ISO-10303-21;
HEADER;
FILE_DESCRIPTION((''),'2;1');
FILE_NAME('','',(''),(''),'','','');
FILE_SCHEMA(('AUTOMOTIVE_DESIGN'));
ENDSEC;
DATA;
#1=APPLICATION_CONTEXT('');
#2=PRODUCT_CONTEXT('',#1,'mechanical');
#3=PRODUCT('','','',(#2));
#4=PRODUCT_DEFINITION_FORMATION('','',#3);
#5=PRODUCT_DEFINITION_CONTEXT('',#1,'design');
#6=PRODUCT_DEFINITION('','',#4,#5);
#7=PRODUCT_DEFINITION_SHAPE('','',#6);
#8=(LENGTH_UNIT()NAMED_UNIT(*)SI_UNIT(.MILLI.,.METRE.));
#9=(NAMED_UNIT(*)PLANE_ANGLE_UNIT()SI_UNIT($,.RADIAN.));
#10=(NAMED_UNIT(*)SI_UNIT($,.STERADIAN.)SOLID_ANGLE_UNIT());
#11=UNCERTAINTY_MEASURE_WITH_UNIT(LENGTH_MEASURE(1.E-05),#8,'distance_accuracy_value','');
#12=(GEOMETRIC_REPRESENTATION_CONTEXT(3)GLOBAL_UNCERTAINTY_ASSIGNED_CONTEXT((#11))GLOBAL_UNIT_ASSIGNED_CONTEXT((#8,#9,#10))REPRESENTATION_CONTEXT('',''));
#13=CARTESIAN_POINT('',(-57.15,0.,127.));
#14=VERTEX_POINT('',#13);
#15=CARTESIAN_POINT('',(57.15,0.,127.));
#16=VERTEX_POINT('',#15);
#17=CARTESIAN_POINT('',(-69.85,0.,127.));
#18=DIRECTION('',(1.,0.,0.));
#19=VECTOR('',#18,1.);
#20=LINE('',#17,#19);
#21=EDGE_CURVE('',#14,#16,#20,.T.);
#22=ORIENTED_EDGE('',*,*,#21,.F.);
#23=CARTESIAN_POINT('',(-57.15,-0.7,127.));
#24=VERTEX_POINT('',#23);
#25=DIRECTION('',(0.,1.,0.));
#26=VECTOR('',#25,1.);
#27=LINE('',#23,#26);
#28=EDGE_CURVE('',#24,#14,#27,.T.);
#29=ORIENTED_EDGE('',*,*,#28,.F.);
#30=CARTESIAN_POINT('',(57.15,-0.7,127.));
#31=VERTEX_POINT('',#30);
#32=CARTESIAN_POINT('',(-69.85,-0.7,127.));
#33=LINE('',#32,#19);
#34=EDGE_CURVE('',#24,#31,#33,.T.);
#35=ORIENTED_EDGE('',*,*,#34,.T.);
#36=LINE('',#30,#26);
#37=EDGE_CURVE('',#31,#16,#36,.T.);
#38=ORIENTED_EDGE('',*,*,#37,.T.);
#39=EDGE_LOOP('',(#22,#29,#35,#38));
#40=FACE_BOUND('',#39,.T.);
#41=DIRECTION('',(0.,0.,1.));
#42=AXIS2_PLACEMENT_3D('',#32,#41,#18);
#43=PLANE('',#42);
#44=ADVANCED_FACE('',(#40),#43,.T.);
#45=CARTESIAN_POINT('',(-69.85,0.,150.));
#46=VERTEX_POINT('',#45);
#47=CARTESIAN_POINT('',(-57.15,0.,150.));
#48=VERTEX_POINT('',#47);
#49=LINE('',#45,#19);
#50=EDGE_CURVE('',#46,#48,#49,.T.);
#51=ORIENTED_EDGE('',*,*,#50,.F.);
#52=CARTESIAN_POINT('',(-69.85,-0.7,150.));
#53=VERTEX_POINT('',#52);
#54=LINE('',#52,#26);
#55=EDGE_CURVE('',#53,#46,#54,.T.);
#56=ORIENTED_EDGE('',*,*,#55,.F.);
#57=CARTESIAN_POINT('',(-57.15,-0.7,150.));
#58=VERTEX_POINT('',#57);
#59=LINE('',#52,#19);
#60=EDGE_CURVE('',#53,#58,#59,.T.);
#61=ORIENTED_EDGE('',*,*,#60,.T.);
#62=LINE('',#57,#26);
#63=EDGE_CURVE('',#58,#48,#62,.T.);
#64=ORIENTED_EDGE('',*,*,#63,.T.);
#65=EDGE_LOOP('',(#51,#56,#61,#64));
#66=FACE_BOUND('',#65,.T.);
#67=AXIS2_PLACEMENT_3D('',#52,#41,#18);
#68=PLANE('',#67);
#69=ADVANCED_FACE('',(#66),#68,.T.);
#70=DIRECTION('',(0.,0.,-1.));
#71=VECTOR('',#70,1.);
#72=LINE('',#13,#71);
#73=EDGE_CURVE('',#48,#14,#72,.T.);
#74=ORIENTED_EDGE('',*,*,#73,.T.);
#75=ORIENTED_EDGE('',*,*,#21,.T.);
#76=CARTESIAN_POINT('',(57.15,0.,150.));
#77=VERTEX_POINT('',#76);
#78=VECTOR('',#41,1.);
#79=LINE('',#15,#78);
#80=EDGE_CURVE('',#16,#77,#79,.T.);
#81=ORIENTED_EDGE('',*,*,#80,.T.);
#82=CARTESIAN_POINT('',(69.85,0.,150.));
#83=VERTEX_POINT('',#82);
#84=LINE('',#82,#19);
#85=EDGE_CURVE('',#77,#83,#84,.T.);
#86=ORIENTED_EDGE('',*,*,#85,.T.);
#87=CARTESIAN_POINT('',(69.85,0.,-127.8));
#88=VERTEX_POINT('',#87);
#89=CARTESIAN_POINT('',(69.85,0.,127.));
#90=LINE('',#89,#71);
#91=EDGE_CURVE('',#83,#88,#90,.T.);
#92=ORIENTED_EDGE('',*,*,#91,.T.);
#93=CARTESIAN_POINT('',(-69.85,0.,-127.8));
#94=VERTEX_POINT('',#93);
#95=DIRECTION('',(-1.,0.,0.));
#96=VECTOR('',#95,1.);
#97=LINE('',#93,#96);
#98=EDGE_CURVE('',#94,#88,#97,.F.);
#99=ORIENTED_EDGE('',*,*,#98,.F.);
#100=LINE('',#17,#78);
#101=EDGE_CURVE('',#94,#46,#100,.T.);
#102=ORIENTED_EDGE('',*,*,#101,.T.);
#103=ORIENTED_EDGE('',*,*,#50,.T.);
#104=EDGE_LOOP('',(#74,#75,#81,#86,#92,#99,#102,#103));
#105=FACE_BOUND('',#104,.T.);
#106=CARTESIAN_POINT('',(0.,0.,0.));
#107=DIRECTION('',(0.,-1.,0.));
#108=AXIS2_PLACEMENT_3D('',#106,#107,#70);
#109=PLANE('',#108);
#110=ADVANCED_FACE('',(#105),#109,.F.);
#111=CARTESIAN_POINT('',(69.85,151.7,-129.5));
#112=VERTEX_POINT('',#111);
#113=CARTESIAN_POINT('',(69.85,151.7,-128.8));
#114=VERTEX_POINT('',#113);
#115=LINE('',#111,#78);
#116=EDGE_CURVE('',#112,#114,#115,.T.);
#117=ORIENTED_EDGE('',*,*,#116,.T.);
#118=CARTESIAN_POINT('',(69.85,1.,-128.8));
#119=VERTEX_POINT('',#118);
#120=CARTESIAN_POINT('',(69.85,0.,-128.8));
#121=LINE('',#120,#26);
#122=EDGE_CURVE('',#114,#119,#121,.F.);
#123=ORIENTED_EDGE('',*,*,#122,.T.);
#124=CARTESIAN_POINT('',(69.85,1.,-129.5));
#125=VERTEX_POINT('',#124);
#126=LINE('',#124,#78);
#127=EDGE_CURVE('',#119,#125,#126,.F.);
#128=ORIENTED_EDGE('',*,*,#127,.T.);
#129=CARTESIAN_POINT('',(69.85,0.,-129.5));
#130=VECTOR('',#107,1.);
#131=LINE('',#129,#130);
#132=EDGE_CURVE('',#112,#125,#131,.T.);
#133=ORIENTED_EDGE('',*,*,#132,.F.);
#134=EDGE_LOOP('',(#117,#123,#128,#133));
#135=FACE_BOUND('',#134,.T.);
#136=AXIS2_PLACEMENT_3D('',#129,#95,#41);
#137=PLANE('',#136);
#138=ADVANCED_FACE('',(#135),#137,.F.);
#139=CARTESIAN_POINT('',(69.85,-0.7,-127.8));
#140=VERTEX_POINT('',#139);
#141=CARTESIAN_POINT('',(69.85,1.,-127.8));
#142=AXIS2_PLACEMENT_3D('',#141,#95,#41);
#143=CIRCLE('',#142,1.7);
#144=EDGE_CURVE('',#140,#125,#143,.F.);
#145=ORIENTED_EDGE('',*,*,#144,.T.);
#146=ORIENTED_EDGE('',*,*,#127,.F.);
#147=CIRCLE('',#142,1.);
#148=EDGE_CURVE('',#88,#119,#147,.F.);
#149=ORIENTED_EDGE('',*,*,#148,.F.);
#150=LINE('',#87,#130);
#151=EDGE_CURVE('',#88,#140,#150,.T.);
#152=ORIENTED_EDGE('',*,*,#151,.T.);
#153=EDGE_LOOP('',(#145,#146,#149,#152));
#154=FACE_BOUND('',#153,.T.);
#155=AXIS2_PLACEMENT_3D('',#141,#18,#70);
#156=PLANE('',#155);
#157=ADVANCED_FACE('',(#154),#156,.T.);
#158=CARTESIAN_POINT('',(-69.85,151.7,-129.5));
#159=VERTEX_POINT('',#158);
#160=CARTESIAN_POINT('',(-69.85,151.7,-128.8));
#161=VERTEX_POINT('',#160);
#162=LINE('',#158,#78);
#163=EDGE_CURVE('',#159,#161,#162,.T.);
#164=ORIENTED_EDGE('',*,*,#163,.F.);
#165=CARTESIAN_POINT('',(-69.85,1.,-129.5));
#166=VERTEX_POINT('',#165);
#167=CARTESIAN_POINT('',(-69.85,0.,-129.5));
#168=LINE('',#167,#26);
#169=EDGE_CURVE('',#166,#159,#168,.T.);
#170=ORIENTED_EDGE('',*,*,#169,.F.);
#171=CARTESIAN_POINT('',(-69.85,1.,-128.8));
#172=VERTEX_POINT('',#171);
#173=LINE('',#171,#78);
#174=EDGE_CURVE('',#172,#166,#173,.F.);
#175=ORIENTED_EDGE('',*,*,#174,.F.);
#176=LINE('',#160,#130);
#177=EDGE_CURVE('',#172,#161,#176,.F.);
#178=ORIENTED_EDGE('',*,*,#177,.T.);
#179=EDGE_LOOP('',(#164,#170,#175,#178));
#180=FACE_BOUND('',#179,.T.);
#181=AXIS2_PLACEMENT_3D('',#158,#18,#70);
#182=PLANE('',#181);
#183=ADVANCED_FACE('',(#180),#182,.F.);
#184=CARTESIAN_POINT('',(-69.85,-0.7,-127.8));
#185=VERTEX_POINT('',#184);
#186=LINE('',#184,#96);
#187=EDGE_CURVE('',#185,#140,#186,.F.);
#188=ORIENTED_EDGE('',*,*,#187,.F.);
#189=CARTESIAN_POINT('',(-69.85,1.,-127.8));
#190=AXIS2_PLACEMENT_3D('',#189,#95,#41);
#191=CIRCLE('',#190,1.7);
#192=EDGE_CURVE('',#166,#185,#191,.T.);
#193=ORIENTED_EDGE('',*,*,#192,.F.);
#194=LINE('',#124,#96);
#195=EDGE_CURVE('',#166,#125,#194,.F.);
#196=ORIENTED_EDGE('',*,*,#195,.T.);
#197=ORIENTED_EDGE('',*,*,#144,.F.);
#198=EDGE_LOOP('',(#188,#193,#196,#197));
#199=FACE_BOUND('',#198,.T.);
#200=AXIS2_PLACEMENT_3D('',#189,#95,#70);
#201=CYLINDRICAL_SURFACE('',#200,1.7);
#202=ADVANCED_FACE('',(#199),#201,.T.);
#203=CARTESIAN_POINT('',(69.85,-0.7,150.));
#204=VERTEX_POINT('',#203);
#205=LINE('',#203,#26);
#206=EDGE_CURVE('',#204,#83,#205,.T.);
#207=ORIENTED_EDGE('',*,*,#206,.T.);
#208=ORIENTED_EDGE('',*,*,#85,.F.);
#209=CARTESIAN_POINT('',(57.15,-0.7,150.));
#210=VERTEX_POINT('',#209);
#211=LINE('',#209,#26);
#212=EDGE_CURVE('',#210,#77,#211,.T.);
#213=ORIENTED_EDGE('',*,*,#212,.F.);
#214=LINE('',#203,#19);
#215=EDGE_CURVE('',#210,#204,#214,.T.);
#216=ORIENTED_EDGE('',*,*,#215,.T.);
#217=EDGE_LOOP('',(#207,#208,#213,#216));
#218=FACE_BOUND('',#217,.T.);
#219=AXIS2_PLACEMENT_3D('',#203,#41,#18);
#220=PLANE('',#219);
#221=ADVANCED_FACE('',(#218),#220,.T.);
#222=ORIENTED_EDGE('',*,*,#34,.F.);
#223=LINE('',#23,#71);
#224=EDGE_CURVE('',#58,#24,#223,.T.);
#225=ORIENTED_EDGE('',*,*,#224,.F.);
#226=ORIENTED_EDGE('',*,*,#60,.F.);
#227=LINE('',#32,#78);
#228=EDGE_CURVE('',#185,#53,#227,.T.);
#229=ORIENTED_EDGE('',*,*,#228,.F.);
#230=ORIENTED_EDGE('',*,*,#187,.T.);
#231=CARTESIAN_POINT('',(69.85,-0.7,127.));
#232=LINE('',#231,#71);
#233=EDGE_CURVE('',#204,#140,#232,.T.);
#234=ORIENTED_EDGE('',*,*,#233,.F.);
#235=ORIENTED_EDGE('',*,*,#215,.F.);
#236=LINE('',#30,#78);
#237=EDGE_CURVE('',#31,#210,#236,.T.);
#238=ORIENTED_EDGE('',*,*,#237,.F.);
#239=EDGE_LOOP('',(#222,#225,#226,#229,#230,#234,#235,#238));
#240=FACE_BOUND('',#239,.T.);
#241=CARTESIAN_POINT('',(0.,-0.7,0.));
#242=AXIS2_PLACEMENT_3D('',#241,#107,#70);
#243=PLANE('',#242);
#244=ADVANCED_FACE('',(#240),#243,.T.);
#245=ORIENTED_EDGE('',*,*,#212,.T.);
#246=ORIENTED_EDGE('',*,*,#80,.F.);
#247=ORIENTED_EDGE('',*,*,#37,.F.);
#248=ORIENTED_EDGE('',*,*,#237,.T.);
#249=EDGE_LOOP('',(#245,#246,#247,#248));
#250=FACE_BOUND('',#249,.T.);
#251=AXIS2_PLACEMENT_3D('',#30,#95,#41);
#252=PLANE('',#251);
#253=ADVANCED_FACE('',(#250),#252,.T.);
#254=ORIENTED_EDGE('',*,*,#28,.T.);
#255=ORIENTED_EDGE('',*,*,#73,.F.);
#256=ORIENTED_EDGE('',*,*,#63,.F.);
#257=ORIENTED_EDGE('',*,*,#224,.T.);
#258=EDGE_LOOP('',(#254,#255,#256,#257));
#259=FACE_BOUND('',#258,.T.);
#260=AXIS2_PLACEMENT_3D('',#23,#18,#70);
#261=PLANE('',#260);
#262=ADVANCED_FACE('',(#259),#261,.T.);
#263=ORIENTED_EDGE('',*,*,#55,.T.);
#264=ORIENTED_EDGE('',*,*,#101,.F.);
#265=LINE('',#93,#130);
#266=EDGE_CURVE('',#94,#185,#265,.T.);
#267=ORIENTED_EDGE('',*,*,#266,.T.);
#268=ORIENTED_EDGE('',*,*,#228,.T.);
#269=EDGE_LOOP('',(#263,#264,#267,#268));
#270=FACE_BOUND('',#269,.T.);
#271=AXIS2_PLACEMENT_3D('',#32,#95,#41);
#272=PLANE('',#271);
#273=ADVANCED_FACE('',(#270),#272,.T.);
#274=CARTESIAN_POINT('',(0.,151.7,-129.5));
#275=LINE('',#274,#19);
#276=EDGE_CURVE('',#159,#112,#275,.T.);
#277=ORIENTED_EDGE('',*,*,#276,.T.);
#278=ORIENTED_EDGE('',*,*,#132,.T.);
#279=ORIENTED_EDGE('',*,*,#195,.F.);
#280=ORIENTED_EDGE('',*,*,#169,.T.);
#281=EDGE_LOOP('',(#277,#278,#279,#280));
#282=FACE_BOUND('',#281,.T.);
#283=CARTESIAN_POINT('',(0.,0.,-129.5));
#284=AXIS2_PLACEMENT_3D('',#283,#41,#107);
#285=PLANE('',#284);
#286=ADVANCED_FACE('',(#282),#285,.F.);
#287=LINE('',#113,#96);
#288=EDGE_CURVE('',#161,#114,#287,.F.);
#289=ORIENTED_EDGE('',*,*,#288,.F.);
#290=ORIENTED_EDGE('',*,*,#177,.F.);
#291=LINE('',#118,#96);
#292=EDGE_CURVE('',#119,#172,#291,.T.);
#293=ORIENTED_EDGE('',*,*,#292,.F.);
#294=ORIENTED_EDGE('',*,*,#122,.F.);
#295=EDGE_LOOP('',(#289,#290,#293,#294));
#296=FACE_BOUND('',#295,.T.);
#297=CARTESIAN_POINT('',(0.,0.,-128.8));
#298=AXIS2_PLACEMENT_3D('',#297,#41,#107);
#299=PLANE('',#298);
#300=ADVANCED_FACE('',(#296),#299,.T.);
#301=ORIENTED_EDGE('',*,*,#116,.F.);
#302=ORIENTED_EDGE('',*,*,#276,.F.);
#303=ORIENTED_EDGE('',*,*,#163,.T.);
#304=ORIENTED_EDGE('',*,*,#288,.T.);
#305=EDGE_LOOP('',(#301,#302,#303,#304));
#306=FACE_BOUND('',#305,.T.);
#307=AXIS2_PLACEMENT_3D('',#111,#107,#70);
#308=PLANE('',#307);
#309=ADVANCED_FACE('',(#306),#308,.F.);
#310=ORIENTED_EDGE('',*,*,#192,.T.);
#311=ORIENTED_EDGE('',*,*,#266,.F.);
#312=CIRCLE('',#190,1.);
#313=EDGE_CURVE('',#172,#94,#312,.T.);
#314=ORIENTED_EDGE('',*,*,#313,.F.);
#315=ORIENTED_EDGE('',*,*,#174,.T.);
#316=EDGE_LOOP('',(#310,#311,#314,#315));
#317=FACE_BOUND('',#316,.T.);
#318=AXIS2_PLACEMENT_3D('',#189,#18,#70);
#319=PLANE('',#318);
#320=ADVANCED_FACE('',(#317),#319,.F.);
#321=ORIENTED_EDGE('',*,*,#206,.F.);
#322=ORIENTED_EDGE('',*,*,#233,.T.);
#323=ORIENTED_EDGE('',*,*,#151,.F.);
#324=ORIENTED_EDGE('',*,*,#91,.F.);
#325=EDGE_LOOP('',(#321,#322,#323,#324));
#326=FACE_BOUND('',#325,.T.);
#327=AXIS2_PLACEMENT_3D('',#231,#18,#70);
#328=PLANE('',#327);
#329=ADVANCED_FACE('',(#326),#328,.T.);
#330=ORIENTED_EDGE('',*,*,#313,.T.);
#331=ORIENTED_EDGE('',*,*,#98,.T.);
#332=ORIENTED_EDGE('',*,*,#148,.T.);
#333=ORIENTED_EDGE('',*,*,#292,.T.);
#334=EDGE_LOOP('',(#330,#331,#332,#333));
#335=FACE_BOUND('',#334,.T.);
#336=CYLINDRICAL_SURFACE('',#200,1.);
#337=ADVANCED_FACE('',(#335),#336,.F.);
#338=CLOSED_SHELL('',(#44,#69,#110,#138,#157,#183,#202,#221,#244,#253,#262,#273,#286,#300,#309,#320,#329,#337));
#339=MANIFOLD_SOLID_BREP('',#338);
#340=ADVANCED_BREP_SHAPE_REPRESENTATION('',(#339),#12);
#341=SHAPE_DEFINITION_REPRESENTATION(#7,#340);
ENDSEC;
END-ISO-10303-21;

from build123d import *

# Parameters (mm, degrees)
SKETCH1_W          = 139.7
SKETCH1_H          = 254
BASE_FLANGE1_DEPTH = 0.7
EDGE_FLANGE1_DEPTH = 139.7
SKETCH9_W          = 12.7
SKETCH9_H          = 23
TAB1_DEPTH         = 0.7
SKETCH12_W         = 12.7
SKETCH12_H         = 23
TAB2_DEPTH         = 0.7


# Sheet-metal steps are written as plain solids
with BuildPart() as part:
    # Sketch1 → Base-Flange1 (new body)
    with BuildSketch(Plane(origin=(0, 0, 0), x_dir=(1, 0, 0), z_dir=(0, 1, 0))):
        Rectangle(SKETCH1_W, SKETCH1_H)
    extrude(amount=-BASE_FLANGE1_DEPTH)

    # Edge-Flange1 section (across the edge) → Edge-Flange1 (add)
    with BuildSketch(Plane(origin=(69.85, 0, -128.8), x_dir=(0, 0, 1), z_dir=(-1, 0, 0))):
        with BuildLine():
            Line((-0.7, 1), (-0.7, 151.7))
            Line((-0.7, 151.7), (0, 151.7))
            Line((0, 151.7), (0, 1))
            ThreePointArc((0, 1), (0.292893219, 0.292893219), (1, 0))
            Line((1, 0), (1.8, 0))
            Line((1.8, 0), (1.8, -0.7))
            Line((1.8, -0.7), (1, -0.7))
            ThreePointArc((1, -0.7), (-0.202081528, -0.202081528), (-0.7, 1))
        make_face()
    extrude(amount=EDGE_FLANGE1_DEPTH)

    # Sketch9 → Tab1 (add)
    with BuildSketch(Plane(origin=(0, 0, 0), x_dir=(1, 0, 0), z_dir=(0, 1, 0))):
        with Locations((-63.5, -138.5)):
            Rectangle(SKETCH9_W, SKETCH9_H)
    extrude(amount=-TAB1_DEPTH)

    # Sketch12 → Tab2 (add)
    with BuildSketch(Plane(origin=(0, 0, 0), x_dir=(1, 0, 0), z_dir=(0, 1, 0))):
        with Locations((63.5, -138.5)):
            Rectangle(SKETCH12_W, SKETCH12_H)
    extrude(amount=-TAB2_DEPTH)


solid = part.part
